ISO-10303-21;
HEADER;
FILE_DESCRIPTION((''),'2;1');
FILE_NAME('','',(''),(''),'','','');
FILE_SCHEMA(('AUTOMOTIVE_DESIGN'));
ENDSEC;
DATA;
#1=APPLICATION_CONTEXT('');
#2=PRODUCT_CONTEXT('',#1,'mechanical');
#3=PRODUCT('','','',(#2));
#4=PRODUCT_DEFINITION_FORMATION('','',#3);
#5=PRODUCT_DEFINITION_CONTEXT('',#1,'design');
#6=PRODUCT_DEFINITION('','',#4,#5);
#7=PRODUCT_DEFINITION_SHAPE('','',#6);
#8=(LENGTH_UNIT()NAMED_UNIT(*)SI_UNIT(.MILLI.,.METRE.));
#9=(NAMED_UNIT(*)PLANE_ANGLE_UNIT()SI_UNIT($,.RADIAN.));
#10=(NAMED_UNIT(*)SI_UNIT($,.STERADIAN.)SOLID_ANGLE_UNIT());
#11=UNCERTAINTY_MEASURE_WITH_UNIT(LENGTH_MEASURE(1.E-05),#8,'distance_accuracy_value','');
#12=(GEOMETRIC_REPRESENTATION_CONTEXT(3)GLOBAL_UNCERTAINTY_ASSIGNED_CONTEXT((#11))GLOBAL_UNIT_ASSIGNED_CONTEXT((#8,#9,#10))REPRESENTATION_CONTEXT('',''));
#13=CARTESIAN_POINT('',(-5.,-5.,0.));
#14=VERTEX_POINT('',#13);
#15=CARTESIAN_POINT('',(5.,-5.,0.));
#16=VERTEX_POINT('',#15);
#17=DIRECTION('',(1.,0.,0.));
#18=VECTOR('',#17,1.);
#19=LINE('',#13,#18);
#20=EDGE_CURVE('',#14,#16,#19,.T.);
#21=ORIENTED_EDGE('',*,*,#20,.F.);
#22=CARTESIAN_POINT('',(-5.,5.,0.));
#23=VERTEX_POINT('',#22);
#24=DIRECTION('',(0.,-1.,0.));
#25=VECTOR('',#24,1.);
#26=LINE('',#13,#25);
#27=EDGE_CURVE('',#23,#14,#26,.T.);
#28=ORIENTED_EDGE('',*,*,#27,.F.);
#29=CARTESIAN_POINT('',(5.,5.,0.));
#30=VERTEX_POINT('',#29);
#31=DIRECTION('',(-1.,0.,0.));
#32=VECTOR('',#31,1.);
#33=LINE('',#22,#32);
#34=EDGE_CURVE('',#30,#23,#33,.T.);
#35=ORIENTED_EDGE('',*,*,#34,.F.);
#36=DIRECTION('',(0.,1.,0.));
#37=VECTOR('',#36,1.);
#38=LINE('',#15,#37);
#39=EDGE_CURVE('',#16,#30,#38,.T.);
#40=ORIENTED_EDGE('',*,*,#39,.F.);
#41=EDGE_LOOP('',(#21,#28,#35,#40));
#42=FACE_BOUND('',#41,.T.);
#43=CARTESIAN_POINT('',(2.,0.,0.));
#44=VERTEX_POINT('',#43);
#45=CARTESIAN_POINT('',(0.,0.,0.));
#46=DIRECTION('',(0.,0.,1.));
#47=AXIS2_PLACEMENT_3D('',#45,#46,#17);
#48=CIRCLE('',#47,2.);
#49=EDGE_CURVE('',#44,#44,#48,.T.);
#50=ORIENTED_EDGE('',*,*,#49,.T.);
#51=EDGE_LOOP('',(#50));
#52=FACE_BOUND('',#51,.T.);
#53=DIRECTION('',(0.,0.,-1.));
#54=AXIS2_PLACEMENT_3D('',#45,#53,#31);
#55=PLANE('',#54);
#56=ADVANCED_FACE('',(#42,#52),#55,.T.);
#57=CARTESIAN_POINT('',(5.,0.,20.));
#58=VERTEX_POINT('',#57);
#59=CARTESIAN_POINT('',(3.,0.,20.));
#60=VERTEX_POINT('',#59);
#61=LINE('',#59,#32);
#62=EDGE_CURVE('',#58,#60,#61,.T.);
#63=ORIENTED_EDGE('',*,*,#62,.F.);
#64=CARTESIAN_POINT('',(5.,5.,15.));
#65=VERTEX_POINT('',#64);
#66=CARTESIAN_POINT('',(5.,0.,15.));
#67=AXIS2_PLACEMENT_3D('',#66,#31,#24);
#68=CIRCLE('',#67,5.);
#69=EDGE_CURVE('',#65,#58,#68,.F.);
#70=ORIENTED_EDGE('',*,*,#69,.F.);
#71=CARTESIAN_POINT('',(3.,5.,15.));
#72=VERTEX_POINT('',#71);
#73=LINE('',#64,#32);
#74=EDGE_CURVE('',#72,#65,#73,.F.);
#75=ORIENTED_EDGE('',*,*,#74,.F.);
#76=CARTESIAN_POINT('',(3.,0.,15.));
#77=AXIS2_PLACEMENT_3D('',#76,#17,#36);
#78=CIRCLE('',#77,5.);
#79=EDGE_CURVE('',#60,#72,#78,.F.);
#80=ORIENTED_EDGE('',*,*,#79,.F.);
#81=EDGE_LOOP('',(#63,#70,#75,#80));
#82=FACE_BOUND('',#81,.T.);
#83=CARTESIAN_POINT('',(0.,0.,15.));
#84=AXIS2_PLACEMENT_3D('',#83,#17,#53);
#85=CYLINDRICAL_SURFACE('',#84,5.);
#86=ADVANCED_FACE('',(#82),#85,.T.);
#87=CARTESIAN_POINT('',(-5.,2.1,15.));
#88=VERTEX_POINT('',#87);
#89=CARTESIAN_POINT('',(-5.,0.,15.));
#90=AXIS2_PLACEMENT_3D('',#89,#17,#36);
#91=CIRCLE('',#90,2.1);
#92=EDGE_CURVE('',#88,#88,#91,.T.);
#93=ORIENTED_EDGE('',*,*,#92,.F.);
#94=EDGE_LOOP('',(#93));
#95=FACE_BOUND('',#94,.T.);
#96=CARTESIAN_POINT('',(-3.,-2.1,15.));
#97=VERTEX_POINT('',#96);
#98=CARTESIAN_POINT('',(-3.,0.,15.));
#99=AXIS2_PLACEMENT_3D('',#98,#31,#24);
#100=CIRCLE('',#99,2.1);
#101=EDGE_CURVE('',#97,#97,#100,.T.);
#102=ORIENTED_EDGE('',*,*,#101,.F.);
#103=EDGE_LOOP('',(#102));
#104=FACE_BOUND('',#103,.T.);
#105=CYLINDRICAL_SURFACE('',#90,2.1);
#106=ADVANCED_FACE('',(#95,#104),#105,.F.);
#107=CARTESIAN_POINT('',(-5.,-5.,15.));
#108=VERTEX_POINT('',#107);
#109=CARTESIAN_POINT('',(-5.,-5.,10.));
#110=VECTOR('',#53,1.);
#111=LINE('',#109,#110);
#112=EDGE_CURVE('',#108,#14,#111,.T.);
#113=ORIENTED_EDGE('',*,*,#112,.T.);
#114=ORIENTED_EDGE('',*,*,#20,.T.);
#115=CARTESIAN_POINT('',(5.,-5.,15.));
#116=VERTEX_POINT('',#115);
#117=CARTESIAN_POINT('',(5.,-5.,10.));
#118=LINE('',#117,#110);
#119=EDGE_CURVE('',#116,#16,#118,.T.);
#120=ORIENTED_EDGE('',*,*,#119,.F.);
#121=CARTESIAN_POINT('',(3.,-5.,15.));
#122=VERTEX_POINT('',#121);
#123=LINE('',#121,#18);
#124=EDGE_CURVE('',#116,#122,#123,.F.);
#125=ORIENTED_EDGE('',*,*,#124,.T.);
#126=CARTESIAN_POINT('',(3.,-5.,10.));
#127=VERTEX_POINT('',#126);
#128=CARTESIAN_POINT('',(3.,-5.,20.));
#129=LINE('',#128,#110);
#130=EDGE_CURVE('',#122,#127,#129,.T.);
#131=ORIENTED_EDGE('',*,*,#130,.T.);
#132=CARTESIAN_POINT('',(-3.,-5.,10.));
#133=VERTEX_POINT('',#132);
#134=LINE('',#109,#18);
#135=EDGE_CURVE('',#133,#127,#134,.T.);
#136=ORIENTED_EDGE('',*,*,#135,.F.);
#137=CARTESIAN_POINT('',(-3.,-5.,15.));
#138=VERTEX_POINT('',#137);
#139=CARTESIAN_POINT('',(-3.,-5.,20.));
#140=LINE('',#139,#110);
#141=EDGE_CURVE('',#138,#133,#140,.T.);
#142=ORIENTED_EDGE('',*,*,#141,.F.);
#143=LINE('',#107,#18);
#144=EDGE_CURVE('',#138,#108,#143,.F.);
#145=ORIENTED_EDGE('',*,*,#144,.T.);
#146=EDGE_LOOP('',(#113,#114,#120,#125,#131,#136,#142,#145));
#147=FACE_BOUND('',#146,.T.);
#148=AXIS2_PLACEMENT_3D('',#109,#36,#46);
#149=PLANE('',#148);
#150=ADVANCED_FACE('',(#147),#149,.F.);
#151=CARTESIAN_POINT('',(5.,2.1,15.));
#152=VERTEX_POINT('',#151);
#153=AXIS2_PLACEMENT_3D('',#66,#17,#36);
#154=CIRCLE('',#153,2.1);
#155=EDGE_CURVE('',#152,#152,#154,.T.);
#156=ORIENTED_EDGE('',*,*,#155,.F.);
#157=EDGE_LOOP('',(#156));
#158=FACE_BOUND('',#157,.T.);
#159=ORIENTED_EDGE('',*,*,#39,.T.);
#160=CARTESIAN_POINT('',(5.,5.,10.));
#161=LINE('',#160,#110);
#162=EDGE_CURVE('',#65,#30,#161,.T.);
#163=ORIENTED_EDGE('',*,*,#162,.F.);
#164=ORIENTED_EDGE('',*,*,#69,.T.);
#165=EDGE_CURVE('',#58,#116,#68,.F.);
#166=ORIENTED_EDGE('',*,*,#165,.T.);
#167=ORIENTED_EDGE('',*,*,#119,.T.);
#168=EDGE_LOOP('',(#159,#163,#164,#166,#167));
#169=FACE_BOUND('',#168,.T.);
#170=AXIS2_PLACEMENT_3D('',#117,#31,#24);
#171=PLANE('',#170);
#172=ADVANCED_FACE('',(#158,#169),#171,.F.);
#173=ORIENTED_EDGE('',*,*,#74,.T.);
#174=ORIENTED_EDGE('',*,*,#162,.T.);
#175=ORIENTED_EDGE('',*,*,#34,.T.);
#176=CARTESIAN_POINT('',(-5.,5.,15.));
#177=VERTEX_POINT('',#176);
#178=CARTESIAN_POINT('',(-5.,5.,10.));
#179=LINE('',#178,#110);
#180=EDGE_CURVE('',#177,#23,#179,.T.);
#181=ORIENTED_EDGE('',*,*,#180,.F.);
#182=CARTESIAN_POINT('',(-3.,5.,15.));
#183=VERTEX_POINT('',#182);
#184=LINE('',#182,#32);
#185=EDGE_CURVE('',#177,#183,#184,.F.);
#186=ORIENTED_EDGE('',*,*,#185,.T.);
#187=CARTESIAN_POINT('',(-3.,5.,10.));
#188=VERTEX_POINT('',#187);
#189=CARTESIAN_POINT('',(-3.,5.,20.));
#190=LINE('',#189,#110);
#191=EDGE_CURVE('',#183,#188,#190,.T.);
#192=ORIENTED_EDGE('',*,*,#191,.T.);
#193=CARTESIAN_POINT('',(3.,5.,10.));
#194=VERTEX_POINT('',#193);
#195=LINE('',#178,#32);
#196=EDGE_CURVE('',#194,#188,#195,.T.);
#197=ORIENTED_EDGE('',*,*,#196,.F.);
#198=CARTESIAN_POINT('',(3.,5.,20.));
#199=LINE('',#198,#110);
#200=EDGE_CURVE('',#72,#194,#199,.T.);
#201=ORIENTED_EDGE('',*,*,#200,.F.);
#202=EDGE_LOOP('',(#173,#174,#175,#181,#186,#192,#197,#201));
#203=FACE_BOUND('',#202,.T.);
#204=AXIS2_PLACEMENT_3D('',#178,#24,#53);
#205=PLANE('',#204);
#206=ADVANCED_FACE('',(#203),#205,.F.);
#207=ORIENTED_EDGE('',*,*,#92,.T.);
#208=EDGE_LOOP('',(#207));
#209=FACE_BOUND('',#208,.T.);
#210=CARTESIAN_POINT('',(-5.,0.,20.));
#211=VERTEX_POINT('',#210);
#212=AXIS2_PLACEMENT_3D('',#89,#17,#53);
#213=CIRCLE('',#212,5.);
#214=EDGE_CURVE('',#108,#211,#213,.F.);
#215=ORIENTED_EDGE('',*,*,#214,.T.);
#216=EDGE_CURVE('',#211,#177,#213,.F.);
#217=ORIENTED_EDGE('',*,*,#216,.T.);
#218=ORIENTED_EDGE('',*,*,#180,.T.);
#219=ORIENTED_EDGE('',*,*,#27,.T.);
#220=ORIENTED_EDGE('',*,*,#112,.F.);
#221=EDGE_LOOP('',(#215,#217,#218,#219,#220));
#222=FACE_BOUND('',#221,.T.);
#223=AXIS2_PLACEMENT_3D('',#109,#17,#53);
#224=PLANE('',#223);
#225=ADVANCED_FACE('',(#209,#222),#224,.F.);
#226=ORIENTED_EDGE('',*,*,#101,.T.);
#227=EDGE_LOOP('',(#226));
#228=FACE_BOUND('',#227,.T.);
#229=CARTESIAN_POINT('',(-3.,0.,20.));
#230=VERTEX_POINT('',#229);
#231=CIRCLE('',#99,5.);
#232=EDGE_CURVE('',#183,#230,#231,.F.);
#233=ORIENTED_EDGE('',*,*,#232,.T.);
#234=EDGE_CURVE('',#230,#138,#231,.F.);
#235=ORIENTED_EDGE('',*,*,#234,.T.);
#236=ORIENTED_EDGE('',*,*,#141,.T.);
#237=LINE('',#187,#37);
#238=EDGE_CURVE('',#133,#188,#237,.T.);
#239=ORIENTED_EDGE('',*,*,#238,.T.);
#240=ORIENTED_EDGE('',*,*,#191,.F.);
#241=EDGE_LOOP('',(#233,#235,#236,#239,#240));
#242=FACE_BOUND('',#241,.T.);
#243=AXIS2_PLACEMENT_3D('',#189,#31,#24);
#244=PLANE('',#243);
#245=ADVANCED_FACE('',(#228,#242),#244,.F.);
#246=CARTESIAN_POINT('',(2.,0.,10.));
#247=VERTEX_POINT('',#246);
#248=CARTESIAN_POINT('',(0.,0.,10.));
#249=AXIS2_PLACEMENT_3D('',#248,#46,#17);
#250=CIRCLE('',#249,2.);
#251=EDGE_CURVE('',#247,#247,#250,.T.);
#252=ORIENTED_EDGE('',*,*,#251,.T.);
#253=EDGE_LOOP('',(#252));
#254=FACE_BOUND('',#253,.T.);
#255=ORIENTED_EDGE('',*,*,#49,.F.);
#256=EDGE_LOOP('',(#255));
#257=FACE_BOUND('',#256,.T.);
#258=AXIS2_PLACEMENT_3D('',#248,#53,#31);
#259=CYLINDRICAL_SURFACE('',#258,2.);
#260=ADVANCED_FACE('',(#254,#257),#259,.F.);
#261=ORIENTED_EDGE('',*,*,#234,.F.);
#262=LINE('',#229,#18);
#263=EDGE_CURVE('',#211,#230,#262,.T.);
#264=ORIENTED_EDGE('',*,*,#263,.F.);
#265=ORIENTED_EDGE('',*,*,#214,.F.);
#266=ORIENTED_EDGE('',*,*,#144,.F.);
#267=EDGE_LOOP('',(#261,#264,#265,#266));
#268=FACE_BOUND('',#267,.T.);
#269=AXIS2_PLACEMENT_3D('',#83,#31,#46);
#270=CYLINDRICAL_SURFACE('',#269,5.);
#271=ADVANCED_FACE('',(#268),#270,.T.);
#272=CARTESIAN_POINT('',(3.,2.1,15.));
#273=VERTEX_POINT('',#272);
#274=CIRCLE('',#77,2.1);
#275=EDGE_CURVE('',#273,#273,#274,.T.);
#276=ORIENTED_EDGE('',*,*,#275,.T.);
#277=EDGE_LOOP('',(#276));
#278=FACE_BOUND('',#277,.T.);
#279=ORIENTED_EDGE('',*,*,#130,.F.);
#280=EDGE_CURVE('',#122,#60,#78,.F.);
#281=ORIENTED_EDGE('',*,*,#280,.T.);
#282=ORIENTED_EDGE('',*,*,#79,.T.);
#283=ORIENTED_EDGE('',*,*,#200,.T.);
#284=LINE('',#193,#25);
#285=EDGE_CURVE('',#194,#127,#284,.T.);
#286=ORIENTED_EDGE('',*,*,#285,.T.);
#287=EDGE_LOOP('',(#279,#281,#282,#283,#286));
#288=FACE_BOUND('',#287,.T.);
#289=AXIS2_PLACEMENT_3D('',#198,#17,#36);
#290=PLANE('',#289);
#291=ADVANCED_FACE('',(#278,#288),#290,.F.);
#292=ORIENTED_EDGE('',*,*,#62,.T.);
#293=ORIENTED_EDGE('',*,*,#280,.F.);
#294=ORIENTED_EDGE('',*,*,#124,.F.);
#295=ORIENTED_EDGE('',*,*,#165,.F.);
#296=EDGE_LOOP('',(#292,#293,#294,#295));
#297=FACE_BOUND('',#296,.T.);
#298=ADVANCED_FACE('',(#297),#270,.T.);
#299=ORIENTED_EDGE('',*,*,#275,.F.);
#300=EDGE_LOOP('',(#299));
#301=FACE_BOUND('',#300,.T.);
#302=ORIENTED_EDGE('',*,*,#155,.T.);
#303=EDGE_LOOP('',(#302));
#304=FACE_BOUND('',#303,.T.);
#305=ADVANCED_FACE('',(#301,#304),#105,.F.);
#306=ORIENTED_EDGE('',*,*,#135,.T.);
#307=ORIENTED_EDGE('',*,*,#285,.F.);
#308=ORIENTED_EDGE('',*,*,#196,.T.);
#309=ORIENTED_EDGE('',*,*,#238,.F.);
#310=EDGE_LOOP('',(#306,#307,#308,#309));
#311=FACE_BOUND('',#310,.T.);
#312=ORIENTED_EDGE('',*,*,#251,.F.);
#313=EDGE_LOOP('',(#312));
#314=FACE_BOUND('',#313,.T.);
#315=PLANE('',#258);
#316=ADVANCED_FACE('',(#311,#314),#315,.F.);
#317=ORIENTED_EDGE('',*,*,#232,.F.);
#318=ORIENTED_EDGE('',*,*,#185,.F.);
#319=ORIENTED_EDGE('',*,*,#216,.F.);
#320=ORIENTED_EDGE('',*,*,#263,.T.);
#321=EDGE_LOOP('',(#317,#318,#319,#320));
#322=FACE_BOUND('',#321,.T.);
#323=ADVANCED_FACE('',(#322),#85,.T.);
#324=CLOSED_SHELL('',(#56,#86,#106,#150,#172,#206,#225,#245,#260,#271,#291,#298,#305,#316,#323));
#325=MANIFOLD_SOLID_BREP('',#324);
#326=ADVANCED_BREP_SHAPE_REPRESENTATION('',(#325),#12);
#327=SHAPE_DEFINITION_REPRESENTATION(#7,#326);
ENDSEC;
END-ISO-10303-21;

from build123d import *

# Parameters (mm, degrees)
SKETCH_1_W          = 10
SKETCH_1_H          = 10
SKETCH_1_R          = 2
EXTRUDE_1_DEPTH     = 10
SKETCH_2_W          = 2
SKETCH_2_H          = 10
EXTRUDE_2_DEPTH     = 10
SKETCH_3_R          = 2.1
CUT_EXTRUDE_1_DEPTH = 10
FILLET_1_R          = 5


with BuildPart() as part:
    # ｽｹｯﾁ1 → ﾎﾞｽ - 押し出し1 (new body)
    with BuildSketch(Plane.XY):
        Rectangle(SKETCH_1_W, SKETCH_1_H)
        Circle(SKETCH_1_R, mode=Mode.SUBTRACT)
    extrude(amount=EXTRUDE_1_DEPTH)

    # ｽｹｯﾁ2 → ﾎﾞｽ - 押し出し2 (add)
    with BuildSketch(Plane.XY.offset(10)):
        with Locations((-4, 0)):
            Rectangle(SKETCH_2_W, SKETCH_2_H)
        with Locations((4, 0)):
            Rectangle(SKETCH_2_W, SKETCH_2_H)
    extrude(amount=EXTRUDE_2_DEPTH)

    # ｽｹｯﾁ3 → ｶｯﾄ - 押し出し1 (cut)
    with BuildSketch(Plane(origin=(5, 0, 0), x_dir=(0, 0, -1), z_dir=(1, 0, 0))):
        with Locations(Location((-15, 0, 0), (0, 0, 90))):
            Circle(SKETCH_3_R)
    extrude(amount=-CUT_EXTRUDE_1_DEPTH, mode=Mode.SUBTRACT)

    # ﾌｨﾚｯﾄ1
    fillet_1_edges = [part.edges().sort_by_distance(p)[0] for p in [
        (4, -5, 20),
        (4, 5, 20),
        (-4, 5, 20),
        (-4, -5, 20),
    ]]
    fillet(fillet_1_edges, radius=FILLET_1_R - 0.0001)  # a hair under: the kernel refuses the full size


solid = part.part
